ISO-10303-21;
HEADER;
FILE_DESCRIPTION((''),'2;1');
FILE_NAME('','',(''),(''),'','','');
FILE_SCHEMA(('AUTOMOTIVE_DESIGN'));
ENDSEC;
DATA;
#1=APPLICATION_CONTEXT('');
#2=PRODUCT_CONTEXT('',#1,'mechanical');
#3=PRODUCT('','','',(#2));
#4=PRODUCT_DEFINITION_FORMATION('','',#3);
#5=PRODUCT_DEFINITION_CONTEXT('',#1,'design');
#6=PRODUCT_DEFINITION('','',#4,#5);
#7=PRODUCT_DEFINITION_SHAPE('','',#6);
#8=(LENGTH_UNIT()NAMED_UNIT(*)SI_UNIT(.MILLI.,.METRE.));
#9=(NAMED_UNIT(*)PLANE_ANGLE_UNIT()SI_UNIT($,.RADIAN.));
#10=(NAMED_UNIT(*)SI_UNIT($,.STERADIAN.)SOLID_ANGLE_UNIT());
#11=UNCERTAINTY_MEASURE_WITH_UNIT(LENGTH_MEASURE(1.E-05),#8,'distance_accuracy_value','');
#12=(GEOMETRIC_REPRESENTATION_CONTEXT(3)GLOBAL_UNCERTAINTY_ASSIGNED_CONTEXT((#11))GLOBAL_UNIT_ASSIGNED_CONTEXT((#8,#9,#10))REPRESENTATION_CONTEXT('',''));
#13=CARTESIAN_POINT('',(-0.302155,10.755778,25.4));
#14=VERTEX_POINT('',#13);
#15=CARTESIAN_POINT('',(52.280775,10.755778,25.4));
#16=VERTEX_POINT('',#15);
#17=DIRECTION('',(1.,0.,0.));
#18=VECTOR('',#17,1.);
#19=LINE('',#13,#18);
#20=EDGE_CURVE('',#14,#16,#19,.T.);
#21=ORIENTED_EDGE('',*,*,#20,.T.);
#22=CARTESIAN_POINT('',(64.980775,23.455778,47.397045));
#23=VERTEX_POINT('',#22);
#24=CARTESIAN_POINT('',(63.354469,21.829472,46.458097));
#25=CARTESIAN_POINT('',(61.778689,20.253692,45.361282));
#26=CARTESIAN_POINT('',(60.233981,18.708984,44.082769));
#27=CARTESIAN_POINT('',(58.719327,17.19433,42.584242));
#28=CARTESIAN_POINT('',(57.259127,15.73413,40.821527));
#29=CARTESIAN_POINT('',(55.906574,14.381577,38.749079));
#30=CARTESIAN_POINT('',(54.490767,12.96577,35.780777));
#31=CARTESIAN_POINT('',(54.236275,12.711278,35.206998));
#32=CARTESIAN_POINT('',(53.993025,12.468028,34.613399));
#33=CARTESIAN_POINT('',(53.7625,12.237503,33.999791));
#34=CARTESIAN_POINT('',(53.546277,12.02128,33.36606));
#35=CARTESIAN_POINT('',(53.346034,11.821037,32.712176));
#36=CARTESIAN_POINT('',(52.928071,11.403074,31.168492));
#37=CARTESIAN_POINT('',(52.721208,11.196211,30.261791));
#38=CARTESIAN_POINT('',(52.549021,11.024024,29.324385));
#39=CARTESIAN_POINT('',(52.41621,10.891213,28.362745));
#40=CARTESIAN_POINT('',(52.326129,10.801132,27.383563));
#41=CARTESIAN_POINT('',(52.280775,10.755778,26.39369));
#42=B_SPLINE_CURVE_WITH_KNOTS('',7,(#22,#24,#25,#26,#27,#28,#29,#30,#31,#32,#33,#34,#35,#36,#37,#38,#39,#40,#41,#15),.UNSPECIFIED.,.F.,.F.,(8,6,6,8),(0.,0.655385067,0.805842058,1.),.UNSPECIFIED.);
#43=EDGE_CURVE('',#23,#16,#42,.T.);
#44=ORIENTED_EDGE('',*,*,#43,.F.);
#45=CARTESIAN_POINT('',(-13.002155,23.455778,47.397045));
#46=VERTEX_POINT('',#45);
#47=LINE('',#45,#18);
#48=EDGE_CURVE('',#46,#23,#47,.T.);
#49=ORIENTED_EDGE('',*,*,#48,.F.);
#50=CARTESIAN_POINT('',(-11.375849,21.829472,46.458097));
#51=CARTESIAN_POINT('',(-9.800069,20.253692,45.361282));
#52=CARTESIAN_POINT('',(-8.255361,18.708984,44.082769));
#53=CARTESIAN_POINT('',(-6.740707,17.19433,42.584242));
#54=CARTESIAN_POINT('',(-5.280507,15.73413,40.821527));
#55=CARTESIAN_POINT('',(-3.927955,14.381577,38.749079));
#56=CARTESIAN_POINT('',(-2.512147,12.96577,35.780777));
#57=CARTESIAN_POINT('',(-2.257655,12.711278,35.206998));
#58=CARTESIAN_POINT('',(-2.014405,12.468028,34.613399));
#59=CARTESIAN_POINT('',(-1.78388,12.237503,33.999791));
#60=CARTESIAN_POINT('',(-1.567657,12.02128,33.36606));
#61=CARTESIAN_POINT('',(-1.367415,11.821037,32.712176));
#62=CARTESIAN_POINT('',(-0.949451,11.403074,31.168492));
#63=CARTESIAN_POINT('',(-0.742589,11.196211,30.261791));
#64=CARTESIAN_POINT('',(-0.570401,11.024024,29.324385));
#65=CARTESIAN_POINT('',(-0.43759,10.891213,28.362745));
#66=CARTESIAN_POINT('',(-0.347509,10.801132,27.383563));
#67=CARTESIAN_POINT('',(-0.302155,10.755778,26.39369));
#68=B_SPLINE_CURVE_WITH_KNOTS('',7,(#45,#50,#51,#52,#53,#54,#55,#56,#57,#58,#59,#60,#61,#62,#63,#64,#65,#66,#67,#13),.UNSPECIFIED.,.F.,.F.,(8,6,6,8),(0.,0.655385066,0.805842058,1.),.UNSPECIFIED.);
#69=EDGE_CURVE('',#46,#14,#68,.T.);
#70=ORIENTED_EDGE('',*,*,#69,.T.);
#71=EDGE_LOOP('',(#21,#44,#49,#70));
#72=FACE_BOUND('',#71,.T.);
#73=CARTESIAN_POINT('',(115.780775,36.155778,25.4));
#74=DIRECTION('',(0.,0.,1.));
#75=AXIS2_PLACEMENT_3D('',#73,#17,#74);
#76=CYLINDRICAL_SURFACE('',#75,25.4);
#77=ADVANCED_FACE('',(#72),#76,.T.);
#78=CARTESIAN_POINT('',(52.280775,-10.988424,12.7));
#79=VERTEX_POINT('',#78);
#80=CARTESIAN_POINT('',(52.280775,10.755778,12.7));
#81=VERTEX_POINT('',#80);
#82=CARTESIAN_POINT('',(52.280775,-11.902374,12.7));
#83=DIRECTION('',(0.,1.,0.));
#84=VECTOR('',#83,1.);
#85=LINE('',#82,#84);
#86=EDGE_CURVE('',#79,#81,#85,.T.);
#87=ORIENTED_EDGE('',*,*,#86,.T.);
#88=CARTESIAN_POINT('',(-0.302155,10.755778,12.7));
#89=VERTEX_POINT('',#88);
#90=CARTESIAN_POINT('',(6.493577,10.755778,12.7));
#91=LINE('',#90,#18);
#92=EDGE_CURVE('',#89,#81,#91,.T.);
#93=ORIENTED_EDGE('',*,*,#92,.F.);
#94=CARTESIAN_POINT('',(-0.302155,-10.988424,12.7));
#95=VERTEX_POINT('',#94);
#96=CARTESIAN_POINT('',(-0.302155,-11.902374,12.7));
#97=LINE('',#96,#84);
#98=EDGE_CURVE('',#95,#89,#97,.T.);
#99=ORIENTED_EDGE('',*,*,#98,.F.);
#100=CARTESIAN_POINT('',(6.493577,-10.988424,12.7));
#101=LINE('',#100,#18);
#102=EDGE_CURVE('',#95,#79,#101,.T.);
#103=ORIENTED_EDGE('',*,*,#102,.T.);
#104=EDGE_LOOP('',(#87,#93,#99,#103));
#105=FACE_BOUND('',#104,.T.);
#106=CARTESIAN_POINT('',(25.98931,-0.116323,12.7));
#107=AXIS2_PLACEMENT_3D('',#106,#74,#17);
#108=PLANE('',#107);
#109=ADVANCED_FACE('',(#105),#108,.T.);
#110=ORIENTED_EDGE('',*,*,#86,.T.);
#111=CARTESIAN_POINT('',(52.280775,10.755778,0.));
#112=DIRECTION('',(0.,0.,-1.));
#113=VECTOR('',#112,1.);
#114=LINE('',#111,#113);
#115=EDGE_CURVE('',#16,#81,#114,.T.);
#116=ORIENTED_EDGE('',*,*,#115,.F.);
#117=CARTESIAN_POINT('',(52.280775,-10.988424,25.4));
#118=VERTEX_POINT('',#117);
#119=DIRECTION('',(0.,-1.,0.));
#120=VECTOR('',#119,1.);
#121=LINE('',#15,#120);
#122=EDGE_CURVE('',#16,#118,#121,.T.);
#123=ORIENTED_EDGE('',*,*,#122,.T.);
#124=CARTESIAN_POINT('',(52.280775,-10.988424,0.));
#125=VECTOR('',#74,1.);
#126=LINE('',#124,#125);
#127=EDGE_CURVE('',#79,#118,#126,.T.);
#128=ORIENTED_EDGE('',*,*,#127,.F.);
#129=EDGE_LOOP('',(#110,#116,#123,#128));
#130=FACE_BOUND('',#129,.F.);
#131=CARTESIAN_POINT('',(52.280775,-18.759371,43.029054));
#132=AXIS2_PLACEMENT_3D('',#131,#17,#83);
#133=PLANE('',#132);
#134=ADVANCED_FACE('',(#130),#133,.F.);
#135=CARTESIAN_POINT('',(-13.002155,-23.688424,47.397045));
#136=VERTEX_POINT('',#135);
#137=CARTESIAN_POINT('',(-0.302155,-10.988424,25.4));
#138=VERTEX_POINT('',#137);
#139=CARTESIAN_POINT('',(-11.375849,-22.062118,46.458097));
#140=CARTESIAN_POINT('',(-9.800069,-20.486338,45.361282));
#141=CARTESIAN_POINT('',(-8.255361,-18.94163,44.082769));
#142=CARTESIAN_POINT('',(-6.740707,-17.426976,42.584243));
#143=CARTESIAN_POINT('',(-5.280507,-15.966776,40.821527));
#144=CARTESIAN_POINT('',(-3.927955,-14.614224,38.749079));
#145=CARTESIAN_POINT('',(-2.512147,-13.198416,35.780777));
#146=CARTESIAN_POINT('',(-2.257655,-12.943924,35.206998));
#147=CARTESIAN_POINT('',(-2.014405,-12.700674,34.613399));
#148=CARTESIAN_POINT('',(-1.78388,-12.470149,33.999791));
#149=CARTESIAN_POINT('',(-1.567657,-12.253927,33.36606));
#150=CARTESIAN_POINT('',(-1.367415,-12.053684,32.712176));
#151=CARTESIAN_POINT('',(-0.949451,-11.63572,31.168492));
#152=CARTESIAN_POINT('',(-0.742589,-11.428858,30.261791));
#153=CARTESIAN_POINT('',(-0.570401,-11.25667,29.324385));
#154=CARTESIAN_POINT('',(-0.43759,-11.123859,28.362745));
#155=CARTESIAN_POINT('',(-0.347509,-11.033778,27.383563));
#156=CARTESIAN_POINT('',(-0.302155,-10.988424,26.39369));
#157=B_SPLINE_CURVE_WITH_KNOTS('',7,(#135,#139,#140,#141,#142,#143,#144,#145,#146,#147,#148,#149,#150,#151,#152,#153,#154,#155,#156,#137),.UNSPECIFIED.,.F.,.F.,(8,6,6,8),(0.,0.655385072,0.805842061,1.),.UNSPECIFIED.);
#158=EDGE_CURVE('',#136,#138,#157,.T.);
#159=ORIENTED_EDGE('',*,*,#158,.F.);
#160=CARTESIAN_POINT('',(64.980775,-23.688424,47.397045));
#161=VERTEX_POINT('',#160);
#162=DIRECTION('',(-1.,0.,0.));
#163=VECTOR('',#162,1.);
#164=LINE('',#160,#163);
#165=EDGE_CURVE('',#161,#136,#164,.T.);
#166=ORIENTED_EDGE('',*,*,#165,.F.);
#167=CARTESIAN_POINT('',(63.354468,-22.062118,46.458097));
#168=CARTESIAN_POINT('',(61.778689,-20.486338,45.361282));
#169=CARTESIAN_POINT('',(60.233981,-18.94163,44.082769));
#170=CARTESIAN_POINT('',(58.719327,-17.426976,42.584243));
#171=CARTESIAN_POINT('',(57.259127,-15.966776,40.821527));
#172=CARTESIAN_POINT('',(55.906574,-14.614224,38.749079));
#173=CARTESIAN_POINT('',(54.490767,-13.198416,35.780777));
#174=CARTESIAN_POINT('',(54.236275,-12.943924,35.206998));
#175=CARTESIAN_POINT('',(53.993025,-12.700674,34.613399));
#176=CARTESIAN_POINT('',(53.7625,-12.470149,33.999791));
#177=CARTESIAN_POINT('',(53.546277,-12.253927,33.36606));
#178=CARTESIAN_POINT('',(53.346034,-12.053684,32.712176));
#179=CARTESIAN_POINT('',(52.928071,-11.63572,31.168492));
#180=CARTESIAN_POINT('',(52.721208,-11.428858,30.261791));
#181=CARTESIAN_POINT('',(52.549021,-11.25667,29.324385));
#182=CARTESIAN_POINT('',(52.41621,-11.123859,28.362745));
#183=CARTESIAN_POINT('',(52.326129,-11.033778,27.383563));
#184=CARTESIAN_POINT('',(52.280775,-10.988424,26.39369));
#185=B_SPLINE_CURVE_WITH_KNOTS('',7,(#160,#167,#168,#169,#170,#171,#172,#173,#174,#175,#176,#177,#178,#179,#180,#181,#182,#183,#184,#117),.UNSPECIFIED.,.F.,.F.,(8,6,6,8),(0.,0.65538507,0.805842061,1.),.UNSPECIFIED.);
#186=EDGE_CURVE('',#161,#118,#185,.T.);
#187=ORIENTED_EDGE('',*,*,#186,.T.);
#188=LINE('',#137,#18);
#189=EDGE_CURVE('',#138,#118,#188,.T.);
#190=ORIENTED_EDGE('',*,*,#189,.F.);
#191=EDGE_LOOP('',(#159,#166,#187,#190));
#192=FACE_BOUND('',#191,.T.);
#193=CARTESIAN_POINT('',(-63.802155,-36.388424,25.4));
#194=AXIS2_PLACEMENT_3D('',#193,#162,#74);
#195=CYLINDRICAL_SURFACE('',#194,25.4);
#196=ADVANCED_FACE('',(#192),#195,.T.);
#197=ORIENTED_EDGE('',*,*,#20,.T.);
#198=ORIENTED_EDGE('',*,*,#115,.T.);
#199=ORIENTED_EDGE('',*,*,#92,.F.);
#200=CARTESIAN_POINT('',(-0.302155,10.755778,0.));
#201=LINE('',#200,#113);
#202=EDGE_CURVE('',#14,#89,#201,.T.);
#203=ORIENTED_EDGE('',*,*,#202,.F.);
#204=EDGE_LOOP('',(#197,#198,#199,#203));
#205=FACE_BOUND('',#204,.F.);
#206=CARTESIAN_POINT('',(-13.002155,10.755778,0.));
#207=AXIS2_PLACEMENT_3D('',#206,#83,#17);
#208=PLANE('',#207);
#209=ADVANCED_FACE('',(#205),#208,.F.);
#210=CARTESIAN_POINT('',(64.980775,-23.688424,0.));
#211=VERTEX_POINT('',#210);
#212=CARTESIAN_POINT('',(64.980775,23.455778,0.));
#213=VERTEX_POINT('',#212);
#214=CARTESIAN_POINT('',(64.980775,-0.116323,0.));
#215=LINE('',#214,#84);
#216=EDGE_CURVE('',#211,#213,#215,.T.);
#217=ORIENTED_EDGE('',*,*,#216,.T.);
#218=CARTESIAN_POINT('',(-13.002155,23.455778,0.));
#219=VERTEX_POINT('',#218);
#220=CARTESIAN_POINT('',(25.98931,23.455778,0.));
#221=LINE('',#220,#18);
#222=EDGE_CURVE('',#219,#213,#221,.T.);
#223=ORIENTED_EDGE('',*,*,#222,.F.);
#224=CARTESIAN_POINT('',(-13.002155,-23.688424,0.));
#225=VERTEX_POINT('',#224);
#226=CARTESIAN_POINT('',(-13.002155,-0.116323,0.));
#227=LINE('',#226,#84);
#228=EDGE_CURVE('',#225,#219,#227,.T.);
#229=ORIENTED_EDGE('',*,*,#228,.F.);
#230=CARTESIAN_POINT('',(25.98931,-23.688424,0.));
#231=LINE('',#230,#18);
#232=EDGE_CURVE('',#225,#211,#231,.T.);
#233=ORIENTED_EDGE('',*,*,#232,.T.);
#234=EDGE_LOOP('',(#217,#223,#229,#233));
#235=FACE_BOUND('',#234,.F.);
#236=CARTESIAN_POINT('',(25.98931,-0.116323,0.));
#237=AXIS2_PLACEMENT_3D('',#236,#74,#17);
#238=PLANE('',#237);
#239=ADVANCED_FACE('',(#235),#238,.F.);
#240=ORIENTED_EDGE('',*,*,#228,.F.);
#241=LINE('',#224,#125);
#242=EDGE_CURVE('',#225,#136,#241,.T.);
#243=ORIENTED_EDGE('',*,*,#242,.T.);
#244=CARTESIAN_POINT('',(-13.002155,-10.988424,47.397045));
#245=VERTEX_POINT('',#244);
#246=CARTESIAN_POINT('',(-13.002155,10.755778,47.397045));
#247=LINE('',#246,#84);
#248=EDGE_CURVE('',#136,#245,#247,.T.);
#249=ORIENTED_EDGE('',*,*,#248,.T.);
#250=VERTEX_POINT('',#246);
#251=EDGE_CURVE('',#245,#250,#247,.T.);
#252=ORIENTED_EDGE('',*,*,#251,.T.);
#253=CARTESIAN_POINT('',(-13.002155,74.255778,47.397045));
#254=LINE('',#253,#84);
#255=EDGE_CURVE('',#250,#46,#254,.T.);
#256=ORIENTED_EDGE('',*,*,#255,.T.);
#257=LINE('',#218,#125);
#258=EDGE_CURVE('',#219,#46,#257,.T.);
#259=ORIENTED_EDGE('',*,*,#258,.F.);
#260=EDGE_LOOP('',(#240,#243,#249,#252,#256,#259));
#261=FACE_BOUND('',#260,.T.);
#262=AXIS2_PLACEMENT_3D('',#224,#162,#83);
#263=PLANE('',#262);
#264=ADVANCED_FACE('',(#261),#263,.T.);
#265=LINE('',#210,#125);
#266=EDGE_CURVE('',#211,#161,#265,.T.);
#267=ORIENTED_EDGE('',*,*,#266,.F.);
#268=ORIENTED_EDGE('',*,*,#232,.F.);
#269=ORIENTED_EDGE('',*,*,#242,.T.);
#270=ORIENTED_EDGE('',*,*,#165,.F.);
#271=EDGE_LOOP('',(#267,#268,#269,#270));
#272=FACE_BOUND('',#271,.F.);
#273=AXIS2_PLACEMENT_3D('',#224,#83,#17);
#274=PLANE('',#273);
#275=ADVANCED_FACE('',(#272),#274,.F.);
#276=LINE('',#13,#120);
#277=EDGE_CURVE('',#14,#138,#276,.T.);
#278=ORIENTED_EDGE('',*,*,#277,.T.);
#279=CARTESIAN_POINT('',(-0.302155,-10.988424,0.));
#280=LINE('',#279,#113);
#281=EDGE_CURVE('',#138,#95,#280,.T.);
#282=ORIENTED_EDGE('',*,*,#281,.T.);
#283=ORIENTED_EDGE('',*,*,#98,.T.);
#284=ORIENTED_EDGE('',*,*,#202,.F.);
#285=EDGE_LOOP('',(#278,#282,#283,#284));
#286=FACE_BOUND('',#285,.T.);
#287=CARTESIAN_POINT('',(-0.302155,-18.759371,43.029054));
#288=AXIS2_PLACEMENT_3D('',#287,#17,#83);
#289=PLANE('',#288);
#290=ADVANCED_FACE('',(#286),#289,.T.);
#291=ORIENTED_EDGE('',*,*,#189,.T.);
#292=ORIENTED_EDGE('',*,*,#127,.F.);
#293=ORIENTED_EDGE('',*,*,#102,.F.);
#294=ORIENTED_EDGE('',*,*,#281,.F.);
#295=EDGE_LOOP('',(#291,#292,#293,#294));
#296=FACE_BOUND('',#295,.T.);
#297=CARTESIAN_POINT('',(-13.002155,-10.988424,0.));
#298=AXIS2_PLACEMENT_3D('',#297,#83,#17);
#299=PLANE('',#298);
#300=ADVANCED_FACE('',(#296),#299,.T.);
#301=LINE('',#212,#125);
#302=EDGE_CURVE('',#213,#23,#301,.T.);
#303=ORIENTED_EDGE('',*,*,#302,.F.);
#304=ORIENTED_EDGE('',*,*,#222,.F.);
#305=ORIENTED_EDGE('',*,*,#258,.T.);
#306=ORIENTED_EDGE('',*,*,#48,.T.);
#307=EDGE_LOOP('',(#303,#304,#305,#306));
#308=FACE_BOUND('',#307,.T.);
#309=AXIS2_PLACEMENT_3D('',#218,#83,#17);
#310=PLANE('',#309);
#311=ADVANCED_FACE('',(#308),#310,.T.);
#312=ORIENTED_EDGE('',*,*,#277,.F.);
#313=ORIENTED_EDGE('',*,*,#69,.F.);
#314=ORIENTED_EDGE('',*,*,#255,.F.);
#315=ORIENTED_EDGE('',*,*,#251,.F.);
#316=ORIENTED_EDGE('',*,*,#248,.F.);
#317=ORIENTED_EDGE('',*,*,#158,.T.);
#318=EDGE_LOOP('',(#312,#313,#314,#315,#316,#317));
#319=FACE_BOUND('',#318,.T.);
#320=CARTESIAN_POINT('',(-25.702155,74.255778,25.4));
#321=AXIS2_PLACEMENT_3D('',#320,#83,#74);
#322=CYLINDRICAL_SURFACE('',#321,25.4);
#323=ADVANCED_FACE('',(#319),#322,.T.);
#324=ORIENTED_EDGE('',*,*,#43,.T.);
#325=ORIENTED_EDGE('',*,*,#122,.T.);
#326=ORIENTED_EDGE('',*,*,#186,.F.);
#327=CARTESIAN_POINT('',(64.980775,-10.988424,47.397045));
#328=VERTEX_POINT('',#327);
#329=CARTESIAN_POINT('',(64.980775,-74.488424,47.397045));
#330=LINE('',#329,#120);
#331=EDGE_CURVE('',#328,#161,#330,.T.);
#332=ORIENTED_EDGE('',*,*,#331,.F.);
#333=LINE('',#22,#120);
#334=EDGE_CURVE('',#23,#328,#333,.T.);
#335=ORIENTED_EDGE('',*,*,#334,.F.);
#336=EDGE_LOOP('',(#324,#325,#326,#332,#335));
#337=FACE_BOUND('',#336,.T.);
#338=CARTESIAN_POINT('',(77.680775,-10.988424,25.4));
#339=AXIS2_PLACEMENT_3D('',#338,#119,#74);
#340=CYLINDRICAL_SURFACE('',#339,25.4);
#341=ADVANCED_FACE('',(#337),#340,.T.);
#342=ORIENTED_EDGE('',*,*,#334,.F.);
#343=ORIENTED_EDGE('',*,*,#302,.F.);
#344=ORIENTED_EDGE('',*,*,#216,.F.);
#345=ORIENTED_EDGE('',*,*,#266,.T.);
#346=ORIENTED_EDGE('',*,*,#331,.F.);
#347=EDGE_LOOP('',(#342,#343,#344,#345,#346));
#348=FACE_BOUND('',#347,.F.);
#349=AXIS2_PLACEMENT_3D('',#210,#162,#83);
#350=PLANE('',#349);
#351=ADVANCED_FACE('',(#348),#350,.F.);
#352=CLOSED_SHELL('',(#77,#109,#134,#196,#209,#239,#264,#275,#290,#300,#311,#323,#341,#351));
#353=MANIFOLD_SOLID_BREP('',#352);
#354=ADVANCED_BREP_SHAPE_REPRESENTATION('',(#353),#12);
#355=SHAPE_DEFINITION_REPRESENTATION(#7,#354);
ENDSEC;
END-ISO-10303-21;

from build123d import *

# Parameters (mm, degrees)
F0_W         = 77.9829304665
F0_H         = 47.1442025155
F1_DEPTH     = 50.8
F2_T         = -12.7
F3_T1_DEPTH  = 52.5829304665
F3_T3_DEPTH  = 21.7442025155
F3_T9_DEPTH  = 116.0829304665
F3_T15_DEPTH = 85.2442025155
F3_T24_DEPTH = 116.0829304665
F3_T30_DEPTH = 85.2442025155
F3_T39_DEPTH = 116.0829304665
F3_T45_DEPTH = 85.2442025155
F3_T54_DEPTH = 85.2442025155
F3_T60_DEPTH = 116.0829304665


# Not quite as in the source:
# - a fillet or chamfer that OpenCascade refuses, or shapes differently, is made with other operations: its cross-section is extruded or revolved along the edge and cut away or added


with BuildPart() as f1:
    # F0 (on Top) → F1 (new body)
    with BuildSketch(Plane.XY):
        with Locations((25.9893098846, -0.1163231209)):
            Rectangle(F0_W, F0_H)
    extrude(amount=F1_DEPTH)

    # F2
    f2_openings = [f1.faces().sort_by_distance(p)[0] for p in [
        (25.98931, -0.116323, 50.8),
    ]]
    offset(amount=F2_T, openings=f2_openings)

    # F3: fillet of radius 25.4 on 4 edges, made by hand

    # F3_s2 → F3_t1 (cut)
    with BuildSketch(Plane.YZ.offset(-0.3021553487)):
        with BuildLine():
            ThreePointArc((36.1557781368, 50.8), (18.1952658947, 43.3605122421), (10.7557781368, 25.4))
            Line((10.7557781368, 25.4), (10.7557781368, 50.8))
            Line((10.7557781368, 50.8), (36.1557781368, 50.8))
        make_face()
        with BuildLine():
            ThreePointArc((-36.3884243786, 50.8), (-18.4279121365, 43.3605122421), (-10.9884243786, 25.4))
            Line((-10.9884243786, 25.4), (-10.9884243786, 50.8))
            Line((-10.9884243786, 50.8), (-36.3884243786, 50.8))
        make_face()
    extrude(amount=F3_T1_DEPTH, mode=Mode.SUBTRACT)

    # F3_s4 → F3_t3 (cut)
    with BuildSketch(Plane.XZ.offset(-10.7557781368)):
        with BuildLine():
            ThreePointArc((-25.7021553487, 50.8), (-7.7416431065, 43.3605122421), (-0.3021553487, 25.4))
            Line((-0.3021553487, 25.4), (-0.3021553487, 50.8))
            Line((-0.3021553487, 50.8), (-25.7021553487, 50.8))
        make_face()
        with BuildLine():
            ThreePointArc((77.6807751179, 50.8), (59.7202628757, 43.3605122421), (52.2807751179, 25.4))
            Line((52.2807751179, 25.4), (52.2807751179, 50.8))
            Line((52.2807751179, 50.8), (77.6807751179, 50.8))
        make_face()
    extrude(amount=F3_T3_DEPTH, mode=Mode.SUBTRACT)


with BuildPart() as f3_tool7:
    # F3_s8 → F3_t9 (new body)
    with BuildSketch(Plane.YZ.offset(115.7807751179)):
        with BuildLine():
            ThreePointArc((36.1557781368, 50.8), (18.1952658947, 43.3605122421), (10.7557781368, 25.4))
            Line((10.7557781368, 25.4), (10.7557781368, 50.8))
            Line((10.7557781368, 50.8), (36.1557781368, 50.8))
        make_face()
    extrude(amount=-F3_T9_DEPTH)

    split(bisect_by=Plane.XZ.offset(-23.4557781368), keep=Keep.TOP)

    split(bisect_by=Plane.YZ.offset(64.9807751179), keep=Keep.BOTTOM)

    split(bisect_by=Plane.YZ.offset(52.2807751179), keep=Keep.TOP)


with BuildPart() as f3_tool13:
    # F3_s14 → F3_t15 (new body)
    with BuildSketch(Plane.XZ.offset(10.9884243786)):
        with BuildLine():
            ThreePointArc((77.6807751179, 50.8), (59.7202628757, 43.3605122421), (52.2807751179, 25.4))
            Line((52.2807751179, 25.4), (52.2807751179, 50.8))
            Line((52.2807751179, 50.8), (77.6807751179, 50.8))
        make_face()
    extrude(amount=-F3_T15_DEPTH)

    split(bisect_by=Plane.XZ.offset(-23.4557781368), keep=Keep.TOP)

    split(bisect_by=Plane.YZ.offset(64.9807751179), keep=Keep.BOTTOM)

    split(bisect_by=Plane.XZ.offset(-10.7557781368), keep=Keep.BOTTOM)


with BuildPart() as f3_tool7_1:
    add(f3_tool7.part)

    # F3_t19: intersect F3_tool13
    add(f3_tool13.part, mode=Mode.INTERSECT)


with BuildPart() as f1_1:
    add(f1.part)

    # F3_t5: cut F3_tool7
    add(f3_tool7_1.part, mode=Mode.SUBTRACT)


with BuildPart() as f3_tool22:
    # F3_s23 → F3_t24 (new body)
    with BuildSketch(Plane.YZ.offset(52.2807751179)):
        with BuildLine():
            ThreePointArc((36.1557781368, 50.8), (18.1952658947, 43.3605122421), (10.7557781368, 25.4))
            Line((10.7557781368, 25.4), (10.7557781368, 50.8))
            Line((10.7557781368, 50.8), (36.1557781368, 50.8))
        make_face()
    extrude(amount=-F3_T24_DEPTH)

    split(bisect_by=Plane.XZ.offset(-23.4557781368), keep=Keep.TOP)

    split(bisect_by=Plane.YZ.offset(-13.0021553487), keep=Keep.TOP)

    split(bisect_by=Plane.YZ.offset(-0.3021553487), keep=Keep.BOTTOM)


with BuildPart() as f3_tool28:
    # F3_s29 → F3_t30 (new body)
    with BuildSketch(Plane.XZ.offset(-74.2557781368)):
        with BuildLine():
            ThreePointArc((-25.7021553487, 50.8), (-7.7416431065, 43.3605122421), (-0.3021553487, 25.4))
            Line((-0.3021553487, 25.4), (-0.3021553487, 50.8))
            Line((-0.3021553487, 50.8), (-25.7021553487, 50.8))
        make_face()
    extrude(amount=F3_T30_DEPTH)

    split(bisect_by=Plane.XZ.offset(-23.4557781368), keep=Keep.TOP)

    split(bisect_by=Plane.YZ.offset(-13.0021553487), keep=Keep.TOP)

    split(bisect_by=Plane.XZ.offset(-10.7557781368), keep=Keep.BOTTOM)


with BuildPart() as f3_tool22_1:
    add(f3_tool22.part)

    # F3_t34: intersect F3_tool28
    add(f3_tool28.part, mode=Mode.INTERSECT)


with BuildPart() as f1_2:
    add(f1_1.part)

    # F3_t20: cut F3_tool22
    add(f3_tool22_1.part, mode=Mode.SUBTRACT)


with BuildPart() as f3_tool37:
    # F3_s38 → F3_t39 (new body)
    with BuildSketch(Plane.YZ.offset(-63.8021553487)):
        with BuildLine():
            ThreePointArc((-36.3884243786, 50.8), (-18.4279121365, 43.3605122421), (-10.9884243786, 25.4))
            Line((-10.9884243786, 25.4), (-10.9884243786, 50.8))
            Line((-10.9884243786, 50.8), (-36.3884243786, 50.8))
        make_face()
    extrude(amount=F3_T39_DEPTH)

    split(bisect_by=Plane.YZ.offset(-13.0021553487), keep=Keep.TOP)

    split(bisect_by=Plane.XZ.offset(23.6884243786), keep=Keep.BOTTOM)

    split(bisect_by=Plane.YZ.offset(-0.3021553487), keep=Keep.BOTTOM)


with BuildPart() as f3_tool43:
    # F3_s44 → F3_t45 (new body)
    with BuildSketch(Plane.XZ.offset(-10.7557781368)):
        with BuildLine():
            ThreePointArc((-25.7021553487, 50.8), (-7.7416431065, 43.3605122421), (-0.3021553487, 25.4))
            Line((-0.3021553487, 25.4), (-0.3021553487, 50.8))
            Line((-0.3021553487, 50.8), (-25.7021553487, 50.8))
        make_face()
    extrude(amount=F3_T45_DEPTH)

    split(bisect_by=Plane.YZ.offset(-13.0021553487), keep=Keep.TOP)

    split(bisect_by=Plane.XZ.offset(23.6884243786), keep=Keep.BOTTOM)

    split(bisect_by=Plane.XZ.offset(10.9884243786), keep=Keep.TOP)


with BuildPart() as f3_tool37_1:
    add(f3_tool37.part)

    # F3_t49: intersect F3_tool43
    add(f3_tool43.part, mode=Mode.INTERSECT)


with BuildPart() as f1_3:
    add(f1_2.part)

    # F3_t35: cut F3_tool37
    add(f3_tool37_1.part, mode=Mode.SUBTRACT)


with BuildPart() as f3_tool52:
    # F3_s53 → F3_t54 (new body)
    with BuildSketch(Plane.XZ.offset(74.4884243786)):
        with BuildLine():
            ThreePointArc((77.6807751179, 50.8), (59.7202628757, 43.3605122421), (52.2807751179, 25.4))
            Line((52.2807751179, 25.4), (52.2807751179, 50.8))
            Line((52.2807751179, 50.8), (77.6807751179, 50.8))
        make_face()
    extrude(amount=-F3_T54_DEPTH)

    split(bisect_by=Plane.XZ.offset(23.6884243786), keep=Keep.BOTTOM)

    split(bisect_by=Plane.YZ.offset(64.9807751179), keep=Keep.BOTTOM)

    split(bisect_by=Plane.XZ.offset(10.9884243786), keep=Keep.TOP)


with BuildPart() as f3_tool58:
    # F3_s59 → F3_t60 (new body)
    with BuildSketch(Plane.YZ.offset(-0.3021553487)):
        with BuildLine():
            ThreePointArc((-36.3884243786, 50.8), (-18.4279121365, 43.3605122421), (-10.9884243786, 25.4))
            Line((-10.9884243786, 25.4), (-10.9884243786, 50.8))
            Line((-10.9884243786, 50.8), (-36.3884243786, 50.8))
        make_face()
    extrude(amount=F3_T60_DEPTH)

    split(bisect_by=Plane.XZ.offset(23.6884243786), keep=Keep.BOTTOM)

    split(bisect_by=Plane.YZ.offset(64.9807751179), keep=Keep.BOTTOM)

    split(bisect_by=Plane.YZ.offset(52.2807751179), keep=Keep.TOP)


with BuildPart() as f3_tool52_1:
    add(f3_tool52.part)

    # F3_t64: intersect F3_tool58
    add(f3_tool58.part, mode=Mode.INTERSECT)


with BuildPart() as f1_4:
    add(f1_3.part)

    # F3_t50: cut F3_tool52
    add(f3_tool52_1.part, mode=Mode.SUBTRACT)


solid = f1_4.part
